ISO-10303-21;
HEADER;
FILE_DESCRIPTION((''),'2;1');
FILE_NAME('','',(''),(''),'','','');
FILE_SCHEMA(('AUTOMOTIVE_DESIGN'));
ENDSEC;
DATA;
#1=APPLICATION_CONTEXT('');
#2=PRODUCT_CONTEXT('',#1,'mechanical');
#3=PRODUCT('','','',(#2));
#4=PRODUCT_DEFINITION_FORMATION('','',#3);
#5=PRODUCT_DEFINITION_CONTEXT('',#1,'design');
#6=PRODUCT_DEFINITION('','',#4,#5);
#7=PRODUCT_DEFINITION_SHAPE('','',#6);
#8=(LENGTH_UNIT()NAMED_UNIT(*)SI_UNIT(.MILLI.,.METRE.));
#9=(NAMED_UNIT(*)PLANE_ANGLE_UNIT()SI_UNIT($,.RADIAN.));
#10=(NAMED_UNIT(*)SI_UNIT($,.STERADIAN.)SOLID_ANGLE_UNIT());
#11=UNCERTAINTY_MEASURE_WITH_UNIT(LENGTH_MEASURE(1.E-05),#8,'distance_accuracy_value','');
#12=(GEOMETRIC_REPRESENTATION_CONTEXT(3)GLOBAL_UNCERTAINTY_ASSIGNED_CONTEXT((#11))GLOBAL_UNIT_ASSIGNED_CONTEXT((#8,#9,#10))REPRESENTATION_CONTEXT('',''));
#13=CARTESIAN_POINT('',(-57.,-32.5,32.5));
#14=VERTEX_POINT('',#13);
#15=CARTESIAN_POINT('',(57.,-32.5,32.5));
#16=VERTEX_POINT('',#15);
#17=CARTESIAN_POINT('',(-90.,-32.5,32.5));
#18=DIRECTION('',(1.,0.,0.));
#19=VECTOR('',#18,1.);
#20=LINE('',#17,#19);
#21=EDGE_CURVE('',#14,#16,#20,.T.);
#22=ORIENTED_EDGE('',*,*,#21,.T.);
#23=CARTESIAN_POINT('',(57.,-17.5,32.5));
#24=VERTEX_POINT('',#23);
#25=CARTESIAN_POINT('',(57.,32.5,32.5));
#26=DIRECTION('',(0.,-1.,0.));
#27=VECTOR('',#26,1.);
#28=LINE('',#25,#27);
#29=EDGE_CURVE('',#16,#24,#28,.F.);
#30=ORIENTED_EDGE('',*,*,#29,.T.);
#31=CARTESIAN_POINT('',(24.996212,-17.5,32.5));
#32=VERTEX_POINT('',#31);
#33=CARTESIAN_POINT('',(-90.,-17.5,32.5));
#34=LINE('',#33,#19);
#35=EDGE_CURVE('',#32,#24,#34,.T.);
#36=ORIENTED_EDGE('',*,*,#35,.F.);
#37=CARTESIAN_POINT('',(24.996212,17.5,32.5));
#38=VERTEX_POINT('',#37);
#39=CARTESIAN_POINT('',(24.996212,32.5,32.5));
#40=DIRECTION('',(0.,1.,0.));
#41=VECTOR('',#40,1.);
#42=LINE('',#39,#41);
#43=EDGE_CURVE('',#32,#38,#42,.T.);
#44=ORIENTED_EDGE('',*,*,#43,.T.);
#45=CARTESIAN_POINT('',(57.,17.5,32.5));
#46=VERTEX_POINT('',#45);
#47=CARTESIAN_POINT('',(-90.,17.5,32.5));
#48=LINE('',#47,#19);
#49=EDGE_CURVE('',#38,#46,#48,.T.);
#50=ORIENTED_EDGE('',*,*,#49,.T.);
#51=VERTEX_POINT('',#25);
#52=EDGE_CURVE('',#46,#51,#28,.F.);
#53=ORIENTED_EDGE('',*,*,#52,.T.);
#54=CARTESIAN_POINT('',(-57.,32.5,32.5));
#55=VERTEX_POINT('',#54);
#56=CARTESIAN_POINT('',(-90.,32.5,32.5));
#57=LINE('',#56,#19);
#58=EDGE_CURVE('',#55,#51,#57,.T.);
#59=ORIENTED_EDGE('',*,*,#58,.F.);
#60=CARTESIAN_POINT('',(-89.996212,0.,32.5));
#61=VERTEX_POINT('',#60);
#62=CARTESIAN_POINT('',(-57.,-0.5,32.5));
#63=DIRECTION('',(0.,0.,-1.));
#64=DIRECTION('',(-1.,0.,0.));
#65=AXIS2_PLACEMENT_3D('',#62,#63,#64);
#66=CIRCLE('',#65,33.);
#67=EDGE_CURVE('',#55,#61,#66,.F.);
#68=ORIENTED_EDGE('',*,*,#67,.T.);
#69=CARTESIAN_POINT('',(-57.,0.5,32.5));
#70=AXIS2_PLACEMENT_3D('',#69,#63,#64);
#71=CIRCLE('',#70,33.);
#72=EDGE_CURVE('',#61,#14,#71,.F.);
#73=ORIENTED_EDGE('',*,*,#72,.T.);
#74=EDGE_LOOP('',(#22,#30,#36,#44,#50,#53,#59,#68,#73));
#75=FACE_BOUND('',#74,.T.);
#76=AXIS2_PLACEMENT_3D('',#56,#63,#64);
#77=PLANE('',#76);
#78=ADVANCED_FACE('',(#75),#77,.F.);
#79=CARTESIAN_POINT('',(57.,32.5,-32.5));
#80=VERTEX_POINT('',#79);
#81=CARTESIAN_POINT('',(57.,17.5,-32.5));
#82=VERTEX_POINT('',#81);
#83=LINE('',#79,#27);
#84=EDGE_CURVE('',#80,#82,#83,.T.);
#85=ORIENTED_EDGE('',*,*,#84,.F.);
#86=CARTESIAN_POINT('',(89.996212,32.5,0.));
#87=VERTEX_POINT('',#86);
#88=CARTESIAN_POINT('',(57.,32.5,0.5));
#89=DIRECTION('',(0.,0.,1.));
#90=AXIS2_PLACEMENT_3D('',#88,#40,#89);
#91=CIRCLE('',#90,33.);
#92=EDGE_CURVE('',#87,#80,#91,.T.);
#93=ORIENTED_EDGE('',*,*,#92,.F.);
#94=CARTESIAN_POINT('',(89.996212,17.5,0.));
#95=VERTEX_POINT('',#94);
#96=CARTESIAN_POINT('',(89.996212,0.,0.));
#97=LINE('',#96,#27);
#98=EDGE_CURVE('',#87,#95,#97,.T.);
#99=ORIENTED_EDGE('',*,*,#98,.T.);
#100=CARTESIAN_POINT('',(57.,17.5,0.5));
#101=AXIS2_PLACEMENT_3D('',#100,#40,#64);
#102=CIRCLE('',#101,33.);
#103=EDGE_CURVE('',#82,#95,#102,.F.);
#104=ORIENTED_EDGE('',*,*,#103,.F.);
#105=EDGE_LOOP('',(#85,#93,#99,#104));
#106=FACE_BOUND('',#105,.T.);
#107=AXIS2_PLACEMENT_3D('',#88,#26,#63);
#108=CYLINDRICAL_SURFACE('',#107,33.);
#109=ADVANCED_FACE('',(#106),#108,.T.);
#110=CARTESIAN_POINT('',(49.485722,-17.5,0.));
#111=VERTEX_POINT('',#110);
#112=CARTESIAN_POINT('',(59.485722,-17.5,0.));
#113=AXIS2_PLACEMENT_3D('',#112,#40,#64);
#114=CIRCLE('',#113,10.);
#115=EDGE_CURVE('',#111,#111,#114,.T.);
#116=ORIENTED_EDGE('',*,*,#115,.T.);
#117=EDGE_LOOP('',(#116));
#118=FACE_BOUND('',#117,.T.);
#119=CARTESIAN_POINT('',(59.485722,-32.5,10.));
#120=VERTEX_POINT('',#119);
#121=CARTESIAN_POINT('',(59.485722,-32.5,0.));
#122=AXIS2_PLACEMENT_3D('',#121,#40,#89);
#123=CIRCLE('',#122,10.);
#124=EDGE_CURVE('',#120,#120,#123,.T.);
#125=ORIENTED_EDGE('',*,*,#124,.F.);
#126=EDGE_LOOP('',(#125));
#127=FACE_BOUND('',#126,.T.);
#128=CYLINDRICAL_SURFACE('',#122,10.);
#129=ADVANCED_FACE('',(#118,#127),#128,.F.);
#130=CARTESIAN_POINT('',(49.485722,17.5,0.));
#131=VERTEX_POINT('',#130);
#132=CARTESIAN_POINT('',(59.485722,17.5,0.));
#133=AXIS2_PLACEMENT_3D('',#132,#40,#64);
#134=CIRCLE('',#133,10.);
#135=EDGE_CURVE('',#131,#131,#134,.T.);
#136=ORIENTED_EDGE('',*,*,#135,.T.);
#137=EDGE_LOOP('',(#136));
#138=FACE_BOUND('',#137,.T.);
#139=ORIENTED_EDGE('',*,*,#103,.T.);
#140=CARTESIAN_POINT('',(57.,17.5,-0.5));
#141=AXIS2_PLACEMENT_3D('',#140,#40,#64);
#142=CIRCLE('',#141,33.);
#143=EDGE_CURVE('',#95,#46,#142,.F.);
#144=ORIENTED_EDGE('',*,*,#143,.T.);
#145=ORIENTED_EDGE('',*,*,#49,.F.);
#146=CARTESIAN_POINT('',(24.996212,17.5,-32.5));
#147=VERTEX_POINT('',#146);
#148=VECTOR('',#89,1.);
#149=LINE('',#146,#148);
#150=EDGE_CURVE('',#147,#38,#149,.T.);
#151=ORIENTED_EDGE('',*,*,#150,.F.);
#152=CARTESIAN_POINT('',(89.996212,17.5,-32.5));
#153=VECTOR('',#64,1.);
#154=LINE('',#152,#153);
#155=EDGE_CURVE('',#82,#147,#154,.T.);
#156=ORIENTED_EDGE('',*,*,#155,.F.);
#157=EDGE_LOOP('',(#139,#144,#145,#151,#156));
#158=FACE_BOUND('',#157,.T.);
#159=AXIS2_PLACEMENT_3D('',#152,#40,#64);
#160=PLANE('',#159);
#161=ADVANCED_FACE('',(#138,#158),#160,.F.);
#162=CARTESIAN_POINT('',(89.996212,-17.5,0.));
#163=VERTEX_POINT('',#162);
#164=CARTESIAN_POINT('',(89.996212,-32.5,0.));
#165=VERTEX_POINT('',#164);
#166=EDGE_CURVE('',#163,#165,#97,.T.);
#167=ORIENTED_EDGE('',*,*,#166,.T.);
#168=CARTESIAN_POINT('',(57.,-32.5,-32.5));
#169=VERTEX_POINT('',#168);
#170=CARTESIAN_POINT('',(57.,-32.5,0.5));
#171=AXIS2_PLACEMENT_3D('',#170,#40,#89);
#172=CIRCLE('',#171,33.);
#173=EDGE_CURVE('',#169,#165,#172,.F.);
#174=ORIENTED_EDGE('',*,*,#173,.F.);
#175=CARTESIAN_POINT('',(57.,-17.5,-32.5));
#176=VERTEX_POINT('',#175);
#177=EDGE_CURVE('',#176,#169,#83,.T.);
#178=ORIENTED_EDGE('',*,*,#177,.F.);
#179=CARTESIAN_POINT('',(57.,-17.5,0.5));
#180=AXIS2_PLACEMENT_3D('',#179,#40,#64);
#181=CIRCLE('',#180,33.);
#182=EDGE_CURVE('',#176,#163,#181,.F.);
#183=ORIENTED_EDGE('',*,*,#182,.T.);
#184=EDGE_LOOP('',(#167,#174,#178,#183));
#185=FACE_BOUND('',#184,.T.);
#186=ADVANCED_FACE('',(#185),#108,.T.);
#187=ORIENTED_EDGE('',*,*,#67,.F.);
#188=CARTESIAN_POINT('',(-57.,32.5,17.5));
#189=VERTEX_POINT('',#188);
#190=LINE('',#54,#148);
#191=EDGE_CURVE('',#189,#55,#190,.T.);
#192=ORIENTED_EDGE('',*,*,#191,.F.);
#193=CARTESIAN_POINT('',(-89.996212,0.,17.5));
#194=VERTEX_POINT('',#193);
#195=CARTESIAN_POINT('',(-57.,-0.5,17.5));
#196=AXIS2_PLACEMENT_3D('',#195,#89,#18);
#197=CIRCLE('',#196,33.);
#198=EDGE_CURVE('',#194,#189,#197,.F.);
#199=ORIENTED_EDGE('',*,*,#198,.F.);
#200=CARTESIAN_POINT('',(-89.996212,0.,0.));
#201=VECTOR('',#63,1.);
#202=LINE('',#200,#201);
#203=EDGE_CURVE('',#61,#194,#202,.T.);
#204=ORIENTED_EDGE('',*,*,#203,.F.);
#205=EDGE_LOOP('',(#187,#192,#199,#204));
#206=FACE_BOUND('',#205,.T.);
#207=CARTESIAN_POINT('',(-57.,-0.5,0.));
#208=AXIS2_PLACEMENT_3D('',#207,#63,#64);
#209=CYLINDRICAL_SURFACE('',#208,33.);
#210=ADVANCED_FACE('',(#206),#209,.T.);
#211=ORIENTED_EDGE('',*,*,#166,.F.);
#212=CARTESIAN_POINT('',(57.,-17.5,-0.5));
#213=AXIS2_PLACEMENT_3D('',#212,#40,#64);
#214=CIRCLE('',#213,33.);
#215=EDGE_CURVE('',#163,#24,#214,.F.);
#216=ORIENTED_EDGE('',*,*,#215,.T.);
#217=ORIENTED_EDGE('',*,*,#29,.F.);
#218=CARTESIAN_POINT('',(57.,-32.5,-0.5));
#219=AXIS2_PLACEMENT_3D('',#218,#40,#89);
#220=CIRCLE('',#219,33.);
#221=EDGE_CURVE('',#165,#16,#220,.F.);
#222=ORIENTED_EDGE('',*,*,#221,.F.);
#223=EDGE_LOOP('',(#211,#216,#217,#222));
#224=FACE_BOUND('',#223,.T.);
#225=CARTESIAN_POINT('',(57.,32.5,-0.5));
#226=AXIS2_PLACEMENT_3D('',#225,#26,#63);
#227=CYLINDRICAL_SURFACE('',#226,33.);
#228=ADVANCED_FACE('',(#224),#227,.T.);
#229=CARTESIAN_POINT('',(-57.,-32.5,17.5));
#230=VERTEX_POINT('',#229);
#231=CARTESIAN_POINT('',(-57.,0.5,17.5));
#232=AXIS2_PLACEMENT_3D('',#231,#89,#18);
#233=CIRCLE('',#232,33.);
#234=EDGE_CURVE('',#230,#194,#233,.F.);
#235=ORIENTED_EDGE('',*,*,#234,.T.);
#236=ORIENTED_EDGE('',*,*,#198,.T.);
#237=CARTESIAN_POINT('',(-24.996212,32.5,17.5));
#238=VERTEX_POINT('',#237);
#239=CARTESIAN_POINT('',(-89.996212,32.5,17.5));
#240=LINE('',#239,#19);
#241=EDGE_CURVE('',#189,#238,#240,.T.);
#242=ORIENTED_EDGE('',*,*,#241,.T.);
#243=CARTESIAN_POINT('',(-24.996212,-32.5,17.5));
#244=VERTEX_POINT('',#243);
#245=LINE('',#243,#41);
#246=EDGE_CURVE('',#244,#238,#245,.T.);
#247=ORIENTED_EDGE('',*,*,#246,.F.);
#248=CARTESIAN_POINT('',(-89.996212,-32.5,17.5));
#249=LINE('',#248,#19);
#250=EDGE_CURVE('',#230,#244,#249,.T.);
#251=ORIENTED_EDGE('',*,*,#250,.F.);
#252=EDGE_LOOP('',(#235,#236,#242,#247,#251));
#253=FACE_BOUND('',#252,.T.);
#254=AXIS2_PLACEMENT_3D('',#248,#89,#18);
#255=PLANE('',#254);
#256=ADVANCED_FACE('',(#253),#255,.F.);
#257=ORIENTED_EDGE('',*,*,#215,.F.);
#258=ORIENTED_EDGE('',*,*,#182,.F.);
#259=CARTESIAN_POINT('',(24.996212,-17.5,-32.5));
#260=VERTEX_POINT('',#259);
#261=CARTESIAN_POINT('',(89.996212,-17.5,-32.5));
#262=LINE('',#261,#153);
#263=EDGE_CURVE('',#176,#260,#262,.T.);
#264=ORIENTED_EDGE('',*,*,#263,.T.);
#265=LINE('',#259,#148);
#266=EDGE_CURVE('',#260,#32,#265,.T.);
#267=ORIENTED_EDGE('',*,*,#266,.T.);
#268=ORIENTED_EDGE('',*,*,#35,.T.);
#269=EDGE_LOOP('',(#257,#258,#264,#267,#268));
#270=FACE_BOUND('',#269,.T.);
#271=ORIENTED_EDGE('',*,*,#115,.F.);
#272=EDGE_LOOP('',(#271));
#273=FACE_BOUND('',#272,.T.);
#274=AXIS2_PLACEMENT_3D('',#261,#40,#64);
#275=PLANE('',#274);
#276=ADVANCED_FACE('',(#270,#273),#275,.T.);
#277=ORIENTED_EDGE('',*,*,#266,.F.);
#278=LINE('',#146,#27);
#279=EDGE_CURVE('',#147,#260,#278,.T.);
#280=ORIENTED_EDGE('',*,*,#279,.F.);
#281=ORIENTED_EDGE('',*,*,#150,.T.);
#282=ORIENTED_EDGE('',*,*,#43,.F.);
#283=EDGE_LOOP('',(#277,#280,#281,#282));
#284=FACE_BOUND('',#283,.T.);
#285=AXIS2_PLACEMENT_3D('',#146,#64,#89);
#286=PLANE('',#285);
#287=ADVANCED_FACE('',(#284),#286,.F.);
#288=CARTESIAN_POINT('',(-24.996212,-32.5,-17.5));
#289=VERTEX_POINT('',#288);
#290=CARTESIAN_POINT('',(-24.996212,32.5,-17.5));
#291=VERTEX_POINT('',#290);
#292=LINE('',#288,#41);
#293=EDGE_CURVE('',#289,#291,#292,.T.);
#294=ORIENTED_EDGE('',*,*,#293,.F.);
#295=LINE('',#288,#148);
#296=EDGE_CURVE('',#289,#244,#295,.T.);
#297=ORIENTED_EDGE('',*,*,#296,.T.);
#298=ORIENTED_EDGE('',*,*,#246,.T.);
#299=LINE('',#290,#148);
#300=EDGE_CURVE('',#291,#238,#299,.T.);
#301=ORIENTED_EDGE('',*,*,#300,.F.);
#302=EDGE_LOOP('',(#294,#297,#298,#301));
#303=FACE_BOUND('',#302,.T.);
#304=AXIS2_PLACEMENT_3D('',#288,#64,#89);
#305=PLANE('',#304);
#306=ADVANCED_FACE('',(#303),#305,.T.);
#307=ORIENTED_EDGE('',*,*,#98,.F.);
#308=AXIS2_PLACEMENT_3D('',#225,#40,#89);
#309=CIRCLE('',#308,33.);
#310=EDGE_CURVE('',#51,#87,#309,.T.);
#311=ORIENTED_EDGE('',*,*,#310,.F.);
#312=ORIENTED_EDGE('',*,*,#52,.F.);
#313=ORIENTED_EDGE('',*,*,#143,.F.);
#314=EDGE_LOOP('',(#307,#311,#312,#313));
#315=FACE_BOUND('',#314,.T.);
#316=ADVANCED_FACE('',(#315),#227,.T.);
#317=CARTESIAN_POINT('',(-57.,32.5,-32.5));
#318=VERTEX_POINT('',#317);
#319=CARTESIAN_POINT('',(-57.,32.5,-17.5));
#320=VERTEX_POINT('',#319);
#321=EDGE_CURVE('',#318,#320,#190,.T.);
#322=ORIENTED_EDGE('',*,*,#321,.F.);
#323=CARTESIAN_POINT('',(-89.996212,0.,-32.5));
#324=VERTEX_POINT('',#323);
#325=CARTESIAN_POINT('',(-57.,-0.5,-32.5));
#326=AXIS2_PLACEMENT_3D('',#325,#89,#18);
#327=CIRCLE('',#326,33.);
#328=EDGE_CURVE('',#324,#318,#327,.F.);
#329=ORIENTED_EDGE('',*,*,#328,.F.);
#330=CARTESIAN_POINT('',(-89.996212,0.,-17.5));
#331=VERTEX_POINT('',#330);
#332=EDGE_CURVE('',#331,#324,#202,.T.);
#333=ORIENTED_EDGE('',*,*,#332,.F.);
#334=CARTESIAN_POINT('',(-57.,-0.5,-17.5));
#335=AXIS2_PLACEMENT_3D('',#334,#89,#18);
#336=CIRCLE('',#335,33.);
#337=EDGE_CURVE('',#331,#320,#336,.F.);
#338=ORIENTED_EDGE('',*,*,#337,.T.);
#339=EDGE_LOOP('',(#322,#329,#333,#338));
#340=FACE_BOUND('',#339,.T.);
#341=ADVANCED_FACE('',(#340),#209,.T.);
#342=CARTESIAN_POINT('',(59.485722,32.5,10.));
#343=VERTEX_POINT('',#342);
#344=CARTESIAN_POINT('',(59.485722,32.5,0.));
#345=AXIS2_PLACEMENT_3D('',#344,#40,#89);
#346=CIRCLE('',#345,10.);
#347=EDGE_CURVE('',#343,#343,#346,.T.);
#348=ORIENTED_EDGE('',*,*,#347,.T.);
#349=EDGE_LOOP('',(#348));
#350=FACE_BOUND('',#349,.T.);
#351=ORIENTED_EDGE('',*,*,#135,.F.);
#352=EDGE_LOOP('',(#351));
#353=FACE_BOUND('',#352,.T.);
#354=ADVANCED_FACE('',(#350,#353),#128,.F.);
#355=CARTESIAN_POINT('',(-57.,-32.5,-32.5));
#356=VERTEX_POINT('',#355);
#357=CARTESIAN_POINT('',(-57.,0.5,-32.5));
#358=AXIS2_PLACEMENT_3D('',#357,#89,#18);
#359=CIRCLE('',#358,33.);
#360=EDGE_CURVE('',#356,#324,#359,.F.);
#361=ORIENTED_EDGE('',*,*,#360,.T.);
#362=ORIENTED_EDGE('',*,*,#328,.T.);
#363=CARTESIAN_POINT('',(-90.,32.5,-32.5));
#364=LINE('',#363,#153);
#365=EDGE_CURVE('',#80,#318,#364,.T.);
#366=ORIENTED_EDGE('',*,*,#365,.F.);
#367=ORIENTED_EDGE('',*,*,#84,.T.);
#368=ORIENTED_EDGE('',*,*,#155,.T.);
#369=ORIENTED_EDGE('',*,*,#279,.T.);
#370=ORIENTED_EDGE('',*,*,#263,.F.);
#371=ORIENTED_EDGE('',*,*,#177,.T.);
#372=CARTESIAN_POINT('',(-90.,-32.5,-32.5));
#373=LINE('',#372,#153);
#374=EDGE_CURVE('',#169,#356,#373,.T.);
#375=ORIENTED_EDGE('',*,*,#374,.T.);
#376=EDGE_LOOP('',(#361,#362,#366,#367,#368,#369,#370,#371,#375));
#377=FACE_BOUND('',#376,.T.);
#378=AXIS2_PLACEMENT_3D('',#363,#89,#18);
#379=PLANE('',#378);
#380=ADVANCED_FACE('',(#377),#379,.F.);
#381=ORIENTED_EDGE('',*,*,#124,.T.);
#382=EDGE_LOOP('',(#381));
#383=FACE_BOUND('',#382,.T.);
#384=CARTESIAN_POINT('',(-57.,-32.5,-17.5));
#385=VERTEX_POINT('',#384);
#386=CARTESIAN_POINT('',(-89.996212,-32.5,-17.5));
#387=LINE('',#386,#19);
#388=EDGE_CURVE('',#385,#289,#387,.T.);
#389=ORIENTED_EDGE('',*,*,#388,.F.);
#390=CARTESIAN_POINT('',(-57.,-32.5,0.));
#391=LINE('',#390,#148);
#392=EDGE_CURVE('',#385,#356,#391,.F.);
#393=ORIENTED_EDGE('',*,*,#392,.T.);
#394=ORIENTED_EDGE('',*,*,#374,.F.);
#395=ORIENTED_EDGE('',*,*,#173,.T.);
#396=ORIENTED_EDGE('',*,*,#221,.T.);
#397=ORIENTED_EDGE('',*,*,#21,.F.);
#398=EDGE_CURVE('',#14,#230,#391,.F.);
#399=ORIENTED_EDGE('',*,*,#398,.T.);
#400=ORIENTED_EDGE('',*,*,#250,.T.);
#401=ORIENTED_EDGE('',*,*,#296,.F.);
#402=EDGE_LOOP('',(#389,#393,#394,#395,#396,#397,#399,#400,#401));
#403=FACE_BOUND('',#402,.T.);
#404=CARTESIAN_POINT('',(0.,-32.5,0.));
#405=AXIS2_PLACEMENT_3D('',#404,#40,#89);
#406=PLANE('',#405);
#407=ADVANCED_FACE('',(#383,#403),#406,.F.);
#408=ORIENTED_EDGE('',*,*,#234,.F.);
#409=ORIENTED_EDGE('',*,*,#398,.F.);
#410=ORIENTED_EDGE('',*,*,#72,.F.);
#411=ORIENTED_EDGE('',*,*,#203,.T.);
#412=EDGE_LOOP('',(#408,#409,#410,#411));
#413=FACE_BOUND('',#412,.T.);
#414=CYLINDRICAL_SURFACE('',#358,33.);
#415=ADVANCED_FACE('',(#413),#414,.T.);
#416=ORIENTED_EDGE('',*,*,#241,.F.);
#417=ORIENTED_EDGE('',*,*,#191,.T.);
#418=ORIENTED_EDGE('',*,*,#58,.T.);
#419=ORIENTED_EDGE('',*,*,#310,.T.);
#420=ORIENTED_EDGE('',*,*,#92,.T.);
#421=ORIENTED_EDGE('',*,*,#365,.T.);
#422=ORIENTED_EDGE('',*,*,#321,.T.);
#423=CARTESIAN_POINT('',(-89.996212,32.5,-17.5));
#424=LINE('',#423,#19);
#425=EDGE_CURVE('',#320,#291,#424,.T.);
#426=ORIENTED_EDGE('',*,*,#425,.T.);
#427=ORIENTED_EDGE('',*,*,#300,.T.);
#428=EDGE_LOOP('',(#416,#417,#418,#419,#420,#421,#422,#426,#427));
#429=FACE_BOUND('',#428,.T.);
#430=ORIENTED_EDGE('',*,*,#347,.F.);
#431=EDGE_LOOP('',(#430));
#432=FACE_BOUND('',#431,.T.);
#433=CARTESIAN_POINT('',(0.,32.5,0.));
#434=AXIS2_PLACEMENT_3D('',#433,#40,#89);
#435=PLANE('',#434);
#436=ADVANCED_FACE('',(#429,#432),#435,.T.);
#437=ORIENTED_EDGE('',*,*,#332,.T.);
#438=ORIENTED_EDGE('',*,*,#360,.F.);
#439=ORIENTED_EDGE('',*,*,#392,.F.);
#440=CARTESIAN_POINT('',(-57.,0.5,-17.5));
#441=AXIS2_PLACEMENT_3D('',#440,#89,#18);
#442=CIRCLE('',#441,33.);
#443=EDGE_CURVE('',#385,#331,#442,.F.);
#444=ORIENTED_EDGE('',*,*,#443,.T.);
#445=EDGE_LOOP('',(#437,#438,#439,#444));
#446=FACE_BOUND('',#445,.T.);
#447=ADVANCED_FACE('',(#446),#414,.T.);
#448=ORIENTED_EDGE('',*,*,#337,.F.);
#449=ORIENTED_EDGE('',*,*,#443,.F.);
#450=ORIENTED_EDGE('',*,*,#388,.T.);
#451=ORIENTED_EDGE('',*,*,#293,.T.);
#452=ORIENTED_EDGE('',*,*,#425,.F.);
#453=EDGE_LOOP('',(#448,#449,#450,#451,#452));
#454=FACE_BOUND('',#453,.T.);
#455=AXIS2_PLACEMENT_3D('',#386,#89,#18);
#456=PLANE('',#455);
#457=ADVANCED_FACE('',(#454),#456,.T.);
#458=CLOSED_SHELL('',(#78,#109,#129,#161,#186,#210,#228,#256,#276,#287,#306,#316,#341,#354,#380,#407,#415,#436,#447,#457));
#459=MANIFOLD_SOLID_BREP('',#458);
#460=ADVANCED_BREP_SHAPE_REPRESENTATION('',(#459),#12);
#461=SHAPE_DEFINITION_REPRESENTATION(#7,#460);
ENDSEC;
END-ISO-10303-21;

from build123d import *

# Parameters (mm, degrees)
ESBO_O1_W                  = 180
ESBO_O1_H                  = 65
RESSALTO_EXTRUS_O3_DEPTH   = 32.5
FILETE6_R                  = 33
CORTE_EXTRUS_O2_DEPTH      = 116.677353013
CORTE_EXTRUS_O2_DEPTH_BACK = 116.677353013
ESBO_O5_W                  = 65
ESBO_O5_H                  = 35
FILETE7_R                  = 33
CORTE_EXTRUS_O3_DEPTH      = 116.674405799
CORTE_EXTRUS_O3_DEPTH_BACK = 116.674405799
ESBO_O8_W                  = 65
ESBO_O8_H                  = 35
CORTE_EXTRUS_O4_DEPTH      = 116.674405799
CORTE_EXTRUS_O4_DEPTH_BACK = 116.674405799
ESBO_O11_R                 = 10


with BuildPart() as part:
    # Esboço1 → Ressalto-extrusão3 (new, symmetric)
    with BuildSketch(Plane(origin=(0, 0, 0), x_dir=(1, 0, 0), z_dir=(0, 1, 0))):
        Rectangle(ESBO_O1_W, ESBO_O1_H)
    extrude(amount=RESSALTO_EXTRUS_O3_DEPTH, both=True)

    # Filete6
    # the kernel refuses this fillet: 33 mm, written as the material it takes off along each edge
    with BuildSketch(Plane(origin=(90, 115, -32.5), x_dir=(-1, 0, 0), z_dir=(0, -1, 0))) as filete6_piece_1:
        with BuildLine():
            CenterArc((FILETE6_R, -FILETE6_R), FILETE6_R, 90, 90)
            Line((0, -FILETE6_R), (0, 0))
            Line((0, 0), (FILETE6_R, 0))
        make_face()
    extrude(amount=230, mode=Mode.SUBTRACT)
    with BuildSketch(Plane(origin=(90, 115, 32.5), x_dir=(-1, 0, 0), z_dir=(0, -1, 0))) as filete6_piece_2:
        with BuildLine():
            CenterArc((FILETE6_R, FILETE6_R), FILETE6_R, 180, 90)
            Line((0, FILETE6_R), (0, 0))
            Line((0, 0), (FILETE6_R, 0))
        make_face()
    extrude(amount=230, mode=Mode.SUBTRACT)

    # Esboço5 → Corte-extrusão2 (cut, two sides: drawn at the far end of the back side and taken through both)
    with BuildSketch(Plane.XY.offset(32.5).offset(-CORTE_EXTRUS_O2_DEPTH_BACK)):
        with Locations((57.496211904, 0)):
            Rectangle(ESBO_O5_W, ESBO_O5_H)
    extrude(amount=CORTE_EXTRUS_O2_DEPTH + CORTE_EXTRUS_O2_DEPTH_BACK, mode=Mode.SUBTRACT)

    # Filete7
    # the kernel refuses this fillet: 33 mm, written as the material it takes off along each edge
    with BuildSketch(Plane(origin=(-90, -32.5, 115), x_dir=(0, 1, 0), z_dir=(0, 0, -1))) as filete7_piece_1:
        with BuildLine():
            CenterArc((FILETE7_R, FILETE7_R), FILETE7_R, 180, 90)
            Line((0, FILETE7_R), (0, 0))
            Line((0, 0), (FILETE7_R, 0))
        make_face()
    extrude(amount=230, mode=Mode.SUBTRACT)
    with BuildSketch(Plane(origin=(-90, 32.5, 115), x_dir=(0, -1, 0), z_dir=(0, 0, -1))) as filete7_piece_2:
        with BuildLine():
            CenterArc((FILETE7_R, -FILETE7_R), FILETE7_R, 90, 90)
            Line((0, -FILETE7_R), (0, 0))
            Line((0, 0), (FILETE7_R, 0))
        make_face()
    extrude(amount=230, mode=Mode.SUBTRACT)

    # Esboço8 → Corte-extrusão3 (cut, two sides: drawn at the far end of the back side and taken through both)
    with BuildSketch(Plane(origin=(0, 32.5, 0), x_dir=(1, 0, 0), z_dir=(0, 1, 0)).offset(-CORTE_EXTRUS_O3_DEPTH_BACK)):
        with Locations((-57.496211904, 0)):
            Rectangle(ESBO_O8_W, ESBO_O8_H)
    extrude(amount=CORTE_EXTRUS_O3_DEPTH + CORTE_EXTRUS_O3_DEPTH_BACK, mode=Mode.SUBTRACT)

    # Esboço11 → Corte-extrusão4 (cut, two sides: drawn at the far end of the back side and taken through both)
    with BuildSketch(Plane(origin=(0, 32.5, 0), x_dir=(1, 0, 0), z_dir=(0, 1, 0)).offset(-CORTE_EXTRUS_O4_DEPTH_BACK)):
        with Locations(Location((59.485722432, 0, 0), (0, 0, 270))):
            Circle(ESBO_O11_R)
    extrude(amount=CORTE_EXTRUS_O4_DEPTH + CORTE_EXTRUS_O4_DEPTH_BACK, mode=Mode.SUBTRACT)


solid = part.part
